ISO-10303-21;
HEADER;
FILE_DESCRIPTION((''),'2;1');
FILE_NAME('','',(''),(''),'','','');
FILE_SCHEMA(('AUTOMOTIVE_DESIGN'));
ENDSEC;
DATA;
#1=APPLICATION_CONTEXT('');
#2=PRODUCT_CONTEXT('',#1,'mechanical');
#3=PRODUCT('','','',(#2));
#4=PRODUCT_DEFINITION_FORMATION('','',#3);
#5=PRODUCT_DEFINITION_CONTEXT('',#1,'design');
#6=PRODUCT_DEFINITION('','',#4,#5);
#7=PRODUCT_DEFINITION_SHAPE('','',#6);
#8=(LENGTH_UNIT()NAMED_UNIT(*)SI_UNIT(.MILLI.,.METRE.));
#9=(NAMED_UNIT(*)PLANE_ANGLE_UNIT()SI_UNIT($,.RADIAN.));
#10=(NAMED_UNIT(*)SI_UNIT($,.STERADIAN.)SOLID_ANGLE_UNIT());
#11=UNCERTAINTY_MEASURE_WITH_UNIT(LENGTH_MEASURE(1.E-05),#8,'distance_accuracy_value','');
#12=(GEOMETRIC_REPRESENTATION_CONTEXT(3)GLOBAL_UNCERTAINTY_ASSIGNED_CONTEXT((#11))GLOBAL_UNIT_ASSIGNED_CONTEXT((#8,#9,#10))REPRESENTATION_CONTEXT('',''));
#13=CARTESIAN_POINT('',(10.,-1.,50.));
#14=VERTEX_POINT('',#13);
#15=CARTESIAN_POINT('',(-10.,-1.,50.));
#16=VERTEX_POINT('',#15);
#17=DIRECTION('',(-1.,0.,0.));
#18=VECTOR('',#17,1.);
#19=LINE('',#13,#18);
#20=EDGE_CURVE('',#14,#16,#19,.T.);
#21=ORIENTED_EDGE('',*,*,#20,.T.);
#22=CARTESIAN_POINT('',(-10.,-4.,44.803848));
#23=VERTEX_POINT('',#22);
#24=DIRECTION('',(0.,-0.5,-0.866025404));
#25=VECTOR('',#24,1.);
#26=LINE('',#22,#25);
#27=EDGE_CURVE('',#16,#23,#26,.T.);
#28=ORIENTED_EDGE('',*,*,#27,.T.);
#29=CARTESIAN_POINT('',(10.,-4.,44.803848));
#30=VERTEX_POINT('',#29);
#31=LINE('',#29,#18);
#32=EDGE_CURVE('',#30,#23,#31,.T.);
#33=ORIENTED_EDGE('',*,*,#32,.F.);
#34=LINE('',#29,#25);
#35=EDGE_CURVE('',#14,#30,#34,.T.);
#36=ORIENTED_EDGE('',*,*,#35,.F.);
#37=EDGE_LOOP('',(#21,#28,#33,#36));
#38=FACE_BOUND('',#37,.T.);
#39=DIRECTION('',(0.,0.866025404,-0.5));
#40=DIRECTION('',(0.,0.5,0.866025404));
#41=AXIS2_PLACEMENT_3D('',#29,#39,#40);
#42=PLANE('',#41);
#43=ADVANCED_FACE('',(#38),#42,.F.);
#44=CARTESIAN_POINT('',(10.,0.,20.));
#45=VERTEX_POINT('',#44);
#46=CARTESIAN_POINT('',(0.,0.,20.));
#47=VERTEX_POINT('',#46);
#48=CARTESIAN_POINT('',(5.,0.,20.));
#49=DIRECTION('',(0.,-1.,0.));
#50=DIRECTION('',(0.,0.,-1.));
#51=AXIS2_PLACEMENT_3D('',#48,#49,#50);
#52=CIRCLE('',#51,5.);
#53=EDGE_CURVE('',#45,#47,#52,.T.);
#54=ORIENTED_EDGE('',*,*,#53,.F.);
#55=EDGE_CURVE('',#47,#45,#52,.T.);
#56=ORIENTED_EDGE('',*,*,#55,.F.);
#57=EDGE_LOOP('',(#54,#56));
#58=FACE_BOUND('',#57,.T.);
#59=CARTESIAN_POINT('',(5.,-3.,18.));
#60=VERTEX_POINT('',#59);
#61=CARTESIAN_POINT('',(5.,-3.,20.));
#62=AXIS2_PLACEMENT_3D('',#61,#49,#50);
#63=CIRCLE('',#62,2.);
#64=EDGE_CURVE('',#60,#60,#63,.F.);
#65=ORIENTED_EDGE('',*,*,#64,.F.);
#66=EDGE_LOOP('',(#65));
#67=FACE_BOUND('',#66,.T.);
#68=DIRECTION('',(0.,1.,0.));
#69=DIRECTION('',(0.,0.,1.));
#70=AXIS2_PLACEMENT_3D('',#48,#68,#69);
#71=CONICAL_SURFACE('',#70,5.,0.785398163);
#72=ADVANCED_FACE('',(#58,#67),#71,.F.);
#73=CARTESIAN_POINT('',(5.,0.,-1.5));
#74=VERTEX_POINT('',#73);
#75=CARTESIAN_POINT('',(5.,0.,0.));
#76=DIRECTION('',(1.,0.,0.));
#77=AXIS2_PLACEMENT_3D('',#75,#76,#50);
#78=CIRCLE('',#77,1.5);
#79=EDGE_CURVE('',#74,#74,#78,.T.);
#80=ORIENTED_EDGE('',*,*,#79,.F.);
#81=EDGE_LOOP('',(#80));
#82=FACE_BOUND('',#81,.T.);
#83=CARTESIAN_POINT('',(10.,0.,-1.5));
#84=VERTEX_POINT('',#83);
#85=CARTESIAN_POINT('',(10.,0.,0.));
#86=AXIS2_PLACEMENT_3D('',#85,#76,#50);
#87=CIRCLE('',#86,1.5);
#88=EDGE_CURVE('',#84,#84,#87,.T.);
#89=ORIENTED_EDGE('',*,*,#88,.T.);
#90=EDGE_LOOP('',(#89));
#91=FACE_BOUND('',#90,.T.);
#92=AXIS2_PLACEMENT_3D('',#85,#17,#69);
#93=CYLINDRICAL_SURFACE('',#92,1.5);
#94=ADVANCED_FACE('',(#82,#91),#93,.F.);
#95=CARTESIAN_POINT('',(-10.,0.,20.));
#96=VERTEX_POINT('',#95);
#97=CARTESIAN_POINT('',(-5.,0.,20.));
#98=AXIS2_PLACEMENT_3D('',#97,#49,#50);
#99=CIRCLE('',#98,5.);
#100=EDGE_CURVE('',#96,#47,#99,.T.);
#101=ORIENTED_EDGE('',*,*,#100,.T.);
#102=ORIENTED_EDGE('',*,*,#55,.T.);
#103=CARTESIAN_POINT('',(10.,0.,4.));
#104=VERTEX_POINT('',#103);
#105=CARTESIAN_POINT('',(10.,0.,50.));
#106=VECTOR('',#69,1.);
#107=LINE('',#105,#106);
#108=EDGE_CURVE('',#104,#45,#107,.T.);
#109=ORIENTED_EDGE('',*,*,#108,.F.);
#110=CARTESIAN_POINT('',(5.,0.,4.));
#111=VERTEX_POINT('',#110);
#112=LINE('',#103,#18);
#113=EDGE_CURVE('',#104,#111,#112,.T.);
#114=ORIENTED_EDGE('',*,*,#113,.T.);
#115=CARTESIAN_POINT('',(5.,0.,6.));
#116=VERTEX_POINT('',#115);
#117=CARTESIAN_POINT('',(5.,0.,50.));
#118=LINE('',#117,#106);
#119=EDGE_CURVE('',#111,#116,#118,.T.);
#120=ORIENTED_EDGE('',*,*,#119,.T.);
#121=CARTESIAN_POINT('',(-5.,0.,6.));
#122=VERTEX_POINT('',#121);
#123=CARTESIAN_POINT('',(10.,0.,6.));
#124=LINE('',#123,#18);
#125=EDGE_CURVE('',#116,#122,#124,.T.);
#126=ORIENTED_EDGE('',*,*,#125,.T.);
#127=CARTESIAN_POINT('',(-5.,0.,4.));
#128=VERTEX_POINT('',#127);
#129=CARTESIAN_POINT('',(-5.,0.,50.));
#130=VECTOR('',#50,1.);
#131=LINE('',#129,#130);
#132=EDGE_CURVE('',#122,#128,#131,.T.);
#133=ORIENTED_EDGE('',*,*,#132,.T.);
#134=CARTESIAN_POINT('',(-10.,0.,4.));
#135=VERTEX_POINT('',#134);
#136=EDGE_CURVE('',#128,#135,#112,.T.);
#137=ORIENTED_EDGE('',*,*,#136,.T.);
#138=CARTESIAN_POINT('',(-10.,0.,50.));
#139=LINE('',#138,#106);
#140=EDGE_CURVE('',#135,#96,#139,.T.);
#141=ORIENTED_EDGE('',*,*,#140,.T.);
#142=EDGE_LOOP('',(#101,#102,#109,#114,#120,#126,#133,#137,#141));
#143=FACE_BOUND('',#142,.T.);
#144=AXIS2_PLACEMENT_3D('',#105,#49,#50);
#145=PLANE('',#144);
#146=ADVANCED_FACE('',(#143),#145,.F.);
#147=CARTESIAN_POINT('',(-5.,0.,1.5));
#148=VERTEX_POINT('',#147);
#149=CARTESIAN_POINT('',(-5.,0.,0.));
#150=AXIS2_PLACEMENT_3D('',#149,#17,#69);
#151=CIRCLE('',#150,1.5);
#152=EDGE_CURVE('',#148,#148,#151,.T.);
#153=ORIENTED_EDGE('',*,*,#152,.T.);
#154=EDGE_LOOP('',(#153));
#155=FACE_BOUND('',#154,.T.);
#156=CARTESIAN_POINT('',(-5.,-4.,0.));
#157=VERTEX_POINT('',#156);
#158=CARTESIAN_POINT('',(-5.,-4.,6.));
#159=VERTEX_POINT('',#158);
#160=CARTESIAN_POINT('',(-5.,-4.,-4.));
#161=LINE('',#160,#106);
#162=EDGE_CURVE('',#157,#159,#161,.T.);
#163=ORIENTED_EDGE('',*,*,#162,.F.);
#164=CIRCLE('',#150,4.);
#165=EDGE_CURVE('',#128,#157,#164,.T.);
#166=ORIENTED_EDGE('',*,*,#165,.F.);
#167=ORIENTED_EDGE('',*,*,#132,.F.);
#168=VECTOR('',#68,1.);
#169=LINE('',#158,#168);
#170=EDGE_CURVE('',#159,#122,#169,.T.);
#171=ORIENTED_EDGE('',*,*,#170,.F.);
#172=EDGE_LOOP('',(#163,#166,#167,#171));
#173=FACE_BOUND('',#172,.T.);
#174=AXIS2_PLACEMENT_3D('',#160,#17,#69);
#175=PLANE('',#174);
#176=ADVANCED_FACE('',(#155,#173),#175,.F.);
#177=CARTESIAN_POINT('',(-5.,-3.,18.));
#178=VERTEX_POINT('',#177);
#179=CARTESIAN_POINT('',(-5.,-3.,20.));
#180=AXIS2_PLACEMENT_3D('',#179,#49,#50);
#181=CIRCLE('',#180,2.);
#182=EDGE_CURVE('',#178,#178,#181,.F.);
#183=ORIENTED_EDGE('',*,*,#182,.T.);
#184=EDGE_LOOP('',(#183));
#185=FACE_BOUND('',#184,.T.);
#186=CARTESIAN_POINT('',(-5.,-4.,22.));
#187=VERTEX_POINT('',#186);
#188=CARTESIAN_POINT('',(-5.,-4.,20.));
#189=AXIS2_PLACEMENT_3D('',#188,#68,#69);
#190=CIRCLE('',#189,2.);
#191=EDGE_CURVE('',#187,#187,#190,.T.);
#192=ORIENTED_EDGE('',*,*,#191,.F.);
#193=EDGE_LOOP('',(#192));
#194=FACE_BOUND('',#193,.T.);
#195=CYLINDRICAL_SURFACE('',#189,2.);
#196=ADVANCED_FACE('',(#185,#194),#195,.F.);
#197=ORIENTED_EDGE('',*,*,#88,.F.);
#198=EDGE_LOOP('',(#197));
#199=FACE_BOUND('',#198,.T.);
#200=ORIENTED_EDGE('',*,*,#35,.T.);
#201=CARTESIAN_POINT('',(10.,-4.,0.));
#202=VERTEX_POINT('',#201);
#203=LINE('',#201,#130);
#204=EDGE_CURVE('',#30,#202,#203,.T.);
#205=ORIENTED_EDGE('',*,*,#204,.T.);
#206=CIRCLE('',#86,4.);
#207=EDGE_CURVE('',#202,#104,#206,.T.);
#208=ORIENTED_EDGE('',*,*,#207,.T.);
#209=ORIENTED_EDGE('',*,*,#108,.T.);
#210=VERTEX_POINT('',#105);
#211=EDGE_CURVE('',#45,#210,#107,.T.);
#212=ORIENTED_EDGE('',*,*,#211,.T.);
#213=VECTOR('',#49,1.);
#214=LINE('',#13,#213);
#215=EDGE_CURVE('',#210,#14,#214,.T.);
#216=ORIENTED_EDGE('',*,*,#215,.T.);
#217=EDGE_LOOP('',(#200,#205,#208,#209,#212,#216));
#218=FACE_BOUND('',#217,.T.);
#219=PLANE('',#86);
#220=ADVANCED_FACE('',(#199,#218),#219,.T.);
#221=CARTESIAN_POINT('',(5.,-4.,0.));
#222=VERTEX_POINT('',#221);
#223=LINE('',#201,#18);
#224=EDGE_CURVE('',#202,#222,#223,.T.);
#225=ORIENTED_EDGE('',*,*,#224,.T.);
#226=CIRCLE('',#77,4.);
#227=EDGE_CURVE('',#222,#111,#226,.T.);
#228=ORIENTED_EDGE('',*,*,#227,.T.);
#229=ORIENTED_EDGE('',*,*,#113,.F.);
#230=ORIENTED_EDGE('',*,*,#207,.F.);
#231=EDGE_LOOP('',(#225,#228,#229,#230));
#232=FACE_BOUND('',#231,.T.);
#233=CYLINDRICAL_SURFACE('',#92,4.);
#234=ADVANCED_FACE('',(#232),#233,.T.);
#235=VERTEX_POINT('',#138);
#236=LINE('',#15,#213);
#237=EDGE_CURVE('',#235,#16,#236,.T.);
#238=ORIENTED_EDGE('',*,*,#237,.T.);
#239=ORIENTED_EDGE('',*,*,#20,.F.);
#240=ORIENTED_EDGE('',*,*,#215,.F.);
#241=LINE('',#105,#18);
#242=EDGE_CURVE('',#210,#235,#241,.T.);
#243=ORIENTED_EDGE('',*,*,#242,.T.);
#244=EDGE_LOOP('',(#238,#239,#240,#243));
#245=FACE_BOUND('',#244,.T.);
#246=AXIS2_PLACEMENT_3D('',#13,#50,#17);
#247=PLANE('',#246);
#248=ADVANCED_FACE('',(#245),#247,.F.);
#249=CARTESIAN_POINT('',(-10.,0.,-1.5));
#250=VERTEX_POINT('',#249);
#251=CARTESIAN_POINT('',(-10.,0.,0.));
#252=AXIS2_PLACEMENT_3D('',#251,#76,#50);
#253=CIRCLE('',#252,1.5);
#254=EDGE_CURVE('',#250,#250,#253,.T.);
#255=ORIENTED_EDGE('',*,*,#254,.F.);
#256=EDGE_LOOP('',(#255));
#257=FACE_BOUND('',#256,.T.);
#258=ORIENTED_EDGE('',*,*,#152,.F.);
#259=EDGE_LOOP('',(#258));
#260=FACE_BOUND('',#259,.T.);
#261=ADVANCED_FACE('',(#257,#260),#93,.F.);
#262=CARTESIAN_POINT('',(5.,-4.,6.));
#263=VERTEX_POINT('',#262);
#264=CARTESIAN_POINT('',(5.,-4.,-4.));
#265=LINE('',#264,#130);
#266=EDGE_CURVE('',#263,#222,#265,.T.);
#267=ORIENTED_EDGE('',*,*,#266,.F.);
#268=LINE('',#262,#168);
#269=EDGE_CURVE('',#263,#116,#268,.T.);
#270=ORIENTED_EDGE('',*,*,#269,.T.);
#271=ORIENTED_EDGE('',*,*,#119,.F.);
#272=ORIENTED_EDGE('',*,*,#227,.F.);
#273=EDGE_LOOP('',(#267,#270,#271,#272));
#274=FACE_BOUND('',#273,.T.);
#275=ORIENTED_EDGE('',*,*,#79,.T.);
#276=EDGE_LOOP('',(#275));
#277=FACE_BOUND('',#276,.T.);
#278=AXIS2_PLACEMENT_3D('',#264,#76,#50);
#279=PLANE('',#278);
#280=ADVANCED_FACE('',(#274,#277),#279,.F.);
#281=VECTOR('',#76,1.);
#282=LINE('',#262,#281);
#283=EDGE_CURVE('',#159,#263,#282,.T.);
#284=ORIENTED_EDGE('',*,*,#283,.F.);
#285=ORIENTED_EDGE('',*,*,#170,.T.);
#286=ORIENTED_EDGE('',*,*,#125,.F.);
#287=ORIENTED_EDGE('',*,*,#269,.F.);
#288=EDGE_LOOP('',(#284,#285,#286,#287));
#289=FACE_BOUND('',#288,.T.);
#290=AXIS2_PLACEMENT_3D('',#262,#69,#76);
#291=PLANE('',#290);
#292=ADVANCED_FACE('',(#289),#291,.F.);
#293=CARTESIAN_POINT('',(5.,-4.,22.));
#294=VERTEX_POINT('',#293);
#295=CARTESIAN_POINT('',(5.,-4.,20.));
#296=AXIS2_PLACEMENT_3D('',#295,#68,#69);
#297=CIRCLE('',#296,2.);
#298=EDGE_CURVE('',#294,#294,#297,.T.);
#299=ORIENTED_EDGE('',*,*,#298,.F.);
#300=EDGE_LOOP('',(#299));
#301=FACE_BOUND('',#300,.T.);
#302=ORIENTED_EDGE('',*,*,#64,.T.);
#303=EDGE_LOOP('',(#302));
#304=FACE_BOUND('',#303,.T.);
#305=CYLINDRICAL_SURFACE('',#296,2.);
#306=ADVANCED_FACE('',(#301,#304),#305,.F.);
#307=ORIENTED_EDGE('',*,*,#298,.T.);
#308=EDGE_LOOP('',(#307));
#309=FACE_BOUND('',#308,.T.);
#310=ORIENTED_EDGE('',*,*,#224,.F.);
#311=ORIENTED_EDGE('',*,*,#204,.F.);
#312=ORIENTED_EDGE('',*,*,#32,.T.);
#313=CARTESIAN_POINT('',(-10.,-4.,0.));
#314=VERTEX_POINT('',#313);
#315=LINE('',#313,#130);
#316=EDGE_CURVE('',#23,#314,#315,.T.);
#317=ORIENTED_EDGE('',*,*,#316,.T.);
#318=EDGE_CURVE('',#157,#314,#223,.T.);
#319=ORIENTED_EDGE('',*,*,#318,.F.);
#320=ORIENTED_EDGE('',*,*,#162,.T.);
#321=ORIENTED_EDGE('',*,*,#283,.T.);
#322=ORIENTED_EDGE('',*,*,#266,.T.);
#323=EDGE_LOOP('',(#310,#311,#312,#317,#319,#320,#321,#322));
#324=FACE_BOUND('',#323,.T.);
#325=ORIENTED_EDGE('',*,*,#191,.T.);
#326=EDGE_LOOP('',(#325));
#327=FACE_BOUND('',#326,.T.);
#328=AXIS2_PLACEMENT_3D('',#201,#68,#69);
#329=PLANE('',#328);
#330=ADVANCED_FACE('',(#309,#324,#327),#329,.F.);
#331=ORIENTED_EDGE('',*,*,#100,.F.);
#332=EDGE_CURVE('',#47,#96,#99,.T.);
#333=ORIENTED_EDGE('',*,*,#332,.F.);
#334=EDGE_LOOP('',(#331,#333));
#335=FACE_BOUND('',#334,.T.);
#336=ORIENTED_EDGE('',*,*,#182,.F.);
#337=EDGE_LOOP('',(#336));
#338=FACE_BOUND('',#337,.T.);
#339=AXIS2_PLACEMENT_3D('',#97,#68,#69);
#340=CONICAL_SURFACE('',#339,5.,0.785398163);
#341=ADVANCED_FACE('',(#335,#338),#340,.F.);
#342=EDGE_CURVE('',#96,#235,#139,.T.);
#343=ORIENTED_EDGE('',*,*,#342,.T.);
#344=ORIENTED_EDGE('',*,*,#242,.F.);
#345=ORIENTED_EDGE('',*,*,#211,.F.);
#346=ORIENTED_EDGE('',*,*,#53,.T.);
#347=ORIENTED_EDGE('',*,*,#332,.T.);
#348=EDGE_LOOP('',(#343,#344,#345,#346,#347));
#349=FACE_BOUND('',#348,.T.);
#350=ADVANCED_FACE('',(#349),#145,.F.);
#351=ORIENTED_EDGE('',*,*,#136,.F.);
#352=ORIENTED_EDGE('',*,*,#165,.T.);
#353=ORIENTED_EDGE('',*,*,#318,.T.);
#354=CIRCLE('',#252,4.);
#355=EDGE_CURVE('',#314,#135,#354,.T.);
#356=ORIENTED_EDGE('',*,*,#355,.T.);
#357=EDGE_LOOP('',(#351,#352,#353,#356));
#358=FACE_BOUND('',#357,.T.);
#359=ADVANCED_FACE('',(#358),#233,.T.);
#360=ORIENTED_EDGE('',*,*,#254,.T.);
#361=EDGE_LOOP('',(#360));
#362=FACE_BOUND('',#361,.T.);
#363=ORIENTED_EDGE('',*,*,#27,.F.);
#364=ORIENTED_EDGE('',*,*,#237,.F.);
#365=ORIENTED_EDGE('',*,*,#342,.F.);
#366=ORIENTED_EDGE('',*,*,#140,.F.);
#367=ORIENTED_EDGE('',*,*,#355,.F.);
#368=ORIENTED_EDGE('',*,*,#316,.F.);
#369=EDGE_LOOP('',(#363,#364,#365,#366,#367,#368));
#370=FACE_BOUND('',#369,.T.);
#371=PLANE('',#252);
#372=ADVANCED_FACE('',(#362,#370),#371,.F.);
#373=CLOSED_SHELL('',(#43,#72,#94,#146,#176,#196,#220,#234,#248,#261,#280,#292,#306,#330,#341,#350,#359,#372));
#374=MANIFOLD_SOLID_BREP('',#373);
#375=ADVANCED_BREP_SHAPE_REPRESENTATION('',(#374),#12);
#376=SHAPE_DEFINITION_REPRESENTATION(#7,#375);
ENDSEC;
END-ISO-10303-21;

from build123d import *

# Parameters (mm, degrees)
SKETCH_1_R               = 1.5
EXTRUDE_1_DEPTH          = 10
CUT_EXTRUDE_1_DEPTH      = 52.14684741
CUT_EXTRUDE_1_DEPTH_BACK = 52.14684741
SKETCH_2_R               = 2
SKETCH_2_W               = 10
SKETCH_2_H               = 10
CHAMFER_1_SIZE           = 3


with BuildPart() as part:
    # 草图1 → 凸台-拉伸1 (new, symmetric)
    with BuildSketch(Plane(origin=(0, 0, 0), x_dir=(0, 0, -1), z_dir=(1, 0, 0))):
        with BuildLine():
            Line((0, -4), (-44.803847577, -4))
            Line((-44.803847577, -4), (-50, -1))
            Line((-50, -1), (-50, 0))
            Line((-50, 0), (-4, 0))
            ThreePointArc((-4, 0), (2.828427125, 2.828427125), (0, -4))
        make_face()
        Circle(SKETCH_1_R, mode=Mode.SUBTRACT)
    extrude(amount=EXTRUDE_1_DEPTH, both=True)

    # 草图2 → 切除-拉伸1 (cut, two sides: drawn at the far end of the back side and taken through both)
    with BuildSketch(Plane(origin=(0, 0, 0), x_dir=(1, 0, 0), z_dir=(0, 1, 0)).offset(-CUT_EXTRUDE_1_DEPTH_BACK)):
        with Locations(Location((-5, -20, 0), (0, 0, 270))):
            Circle(SKETCH_2_R)
        with Locations(Location((5, -20, 0), (0, 0, 270))):
            Circle(SKETCH_2_R)
        with Locations((0, -1)):
            Rectangle(SKETCH_2_W, SKETCH_2_H)
    extrude(amount=CUT_EXTRUDE_1_DEPTH + CUT_EXTRUDE_1_DEPTH_BACK, mode=Mode.SUBTRACT)

    # 倒角1
    chamfer_1_edges = [part.edges().sort_by_distance(p)[0] for p in [
        (5, 0, 18),
        (-5, 0, 18),
    ]]
    chamfer(chamfer_1_edges, length=CHAMFER_1_SIZE - 0.0001)  # a hair under: the kernel refuses the full size


solid = part.part
